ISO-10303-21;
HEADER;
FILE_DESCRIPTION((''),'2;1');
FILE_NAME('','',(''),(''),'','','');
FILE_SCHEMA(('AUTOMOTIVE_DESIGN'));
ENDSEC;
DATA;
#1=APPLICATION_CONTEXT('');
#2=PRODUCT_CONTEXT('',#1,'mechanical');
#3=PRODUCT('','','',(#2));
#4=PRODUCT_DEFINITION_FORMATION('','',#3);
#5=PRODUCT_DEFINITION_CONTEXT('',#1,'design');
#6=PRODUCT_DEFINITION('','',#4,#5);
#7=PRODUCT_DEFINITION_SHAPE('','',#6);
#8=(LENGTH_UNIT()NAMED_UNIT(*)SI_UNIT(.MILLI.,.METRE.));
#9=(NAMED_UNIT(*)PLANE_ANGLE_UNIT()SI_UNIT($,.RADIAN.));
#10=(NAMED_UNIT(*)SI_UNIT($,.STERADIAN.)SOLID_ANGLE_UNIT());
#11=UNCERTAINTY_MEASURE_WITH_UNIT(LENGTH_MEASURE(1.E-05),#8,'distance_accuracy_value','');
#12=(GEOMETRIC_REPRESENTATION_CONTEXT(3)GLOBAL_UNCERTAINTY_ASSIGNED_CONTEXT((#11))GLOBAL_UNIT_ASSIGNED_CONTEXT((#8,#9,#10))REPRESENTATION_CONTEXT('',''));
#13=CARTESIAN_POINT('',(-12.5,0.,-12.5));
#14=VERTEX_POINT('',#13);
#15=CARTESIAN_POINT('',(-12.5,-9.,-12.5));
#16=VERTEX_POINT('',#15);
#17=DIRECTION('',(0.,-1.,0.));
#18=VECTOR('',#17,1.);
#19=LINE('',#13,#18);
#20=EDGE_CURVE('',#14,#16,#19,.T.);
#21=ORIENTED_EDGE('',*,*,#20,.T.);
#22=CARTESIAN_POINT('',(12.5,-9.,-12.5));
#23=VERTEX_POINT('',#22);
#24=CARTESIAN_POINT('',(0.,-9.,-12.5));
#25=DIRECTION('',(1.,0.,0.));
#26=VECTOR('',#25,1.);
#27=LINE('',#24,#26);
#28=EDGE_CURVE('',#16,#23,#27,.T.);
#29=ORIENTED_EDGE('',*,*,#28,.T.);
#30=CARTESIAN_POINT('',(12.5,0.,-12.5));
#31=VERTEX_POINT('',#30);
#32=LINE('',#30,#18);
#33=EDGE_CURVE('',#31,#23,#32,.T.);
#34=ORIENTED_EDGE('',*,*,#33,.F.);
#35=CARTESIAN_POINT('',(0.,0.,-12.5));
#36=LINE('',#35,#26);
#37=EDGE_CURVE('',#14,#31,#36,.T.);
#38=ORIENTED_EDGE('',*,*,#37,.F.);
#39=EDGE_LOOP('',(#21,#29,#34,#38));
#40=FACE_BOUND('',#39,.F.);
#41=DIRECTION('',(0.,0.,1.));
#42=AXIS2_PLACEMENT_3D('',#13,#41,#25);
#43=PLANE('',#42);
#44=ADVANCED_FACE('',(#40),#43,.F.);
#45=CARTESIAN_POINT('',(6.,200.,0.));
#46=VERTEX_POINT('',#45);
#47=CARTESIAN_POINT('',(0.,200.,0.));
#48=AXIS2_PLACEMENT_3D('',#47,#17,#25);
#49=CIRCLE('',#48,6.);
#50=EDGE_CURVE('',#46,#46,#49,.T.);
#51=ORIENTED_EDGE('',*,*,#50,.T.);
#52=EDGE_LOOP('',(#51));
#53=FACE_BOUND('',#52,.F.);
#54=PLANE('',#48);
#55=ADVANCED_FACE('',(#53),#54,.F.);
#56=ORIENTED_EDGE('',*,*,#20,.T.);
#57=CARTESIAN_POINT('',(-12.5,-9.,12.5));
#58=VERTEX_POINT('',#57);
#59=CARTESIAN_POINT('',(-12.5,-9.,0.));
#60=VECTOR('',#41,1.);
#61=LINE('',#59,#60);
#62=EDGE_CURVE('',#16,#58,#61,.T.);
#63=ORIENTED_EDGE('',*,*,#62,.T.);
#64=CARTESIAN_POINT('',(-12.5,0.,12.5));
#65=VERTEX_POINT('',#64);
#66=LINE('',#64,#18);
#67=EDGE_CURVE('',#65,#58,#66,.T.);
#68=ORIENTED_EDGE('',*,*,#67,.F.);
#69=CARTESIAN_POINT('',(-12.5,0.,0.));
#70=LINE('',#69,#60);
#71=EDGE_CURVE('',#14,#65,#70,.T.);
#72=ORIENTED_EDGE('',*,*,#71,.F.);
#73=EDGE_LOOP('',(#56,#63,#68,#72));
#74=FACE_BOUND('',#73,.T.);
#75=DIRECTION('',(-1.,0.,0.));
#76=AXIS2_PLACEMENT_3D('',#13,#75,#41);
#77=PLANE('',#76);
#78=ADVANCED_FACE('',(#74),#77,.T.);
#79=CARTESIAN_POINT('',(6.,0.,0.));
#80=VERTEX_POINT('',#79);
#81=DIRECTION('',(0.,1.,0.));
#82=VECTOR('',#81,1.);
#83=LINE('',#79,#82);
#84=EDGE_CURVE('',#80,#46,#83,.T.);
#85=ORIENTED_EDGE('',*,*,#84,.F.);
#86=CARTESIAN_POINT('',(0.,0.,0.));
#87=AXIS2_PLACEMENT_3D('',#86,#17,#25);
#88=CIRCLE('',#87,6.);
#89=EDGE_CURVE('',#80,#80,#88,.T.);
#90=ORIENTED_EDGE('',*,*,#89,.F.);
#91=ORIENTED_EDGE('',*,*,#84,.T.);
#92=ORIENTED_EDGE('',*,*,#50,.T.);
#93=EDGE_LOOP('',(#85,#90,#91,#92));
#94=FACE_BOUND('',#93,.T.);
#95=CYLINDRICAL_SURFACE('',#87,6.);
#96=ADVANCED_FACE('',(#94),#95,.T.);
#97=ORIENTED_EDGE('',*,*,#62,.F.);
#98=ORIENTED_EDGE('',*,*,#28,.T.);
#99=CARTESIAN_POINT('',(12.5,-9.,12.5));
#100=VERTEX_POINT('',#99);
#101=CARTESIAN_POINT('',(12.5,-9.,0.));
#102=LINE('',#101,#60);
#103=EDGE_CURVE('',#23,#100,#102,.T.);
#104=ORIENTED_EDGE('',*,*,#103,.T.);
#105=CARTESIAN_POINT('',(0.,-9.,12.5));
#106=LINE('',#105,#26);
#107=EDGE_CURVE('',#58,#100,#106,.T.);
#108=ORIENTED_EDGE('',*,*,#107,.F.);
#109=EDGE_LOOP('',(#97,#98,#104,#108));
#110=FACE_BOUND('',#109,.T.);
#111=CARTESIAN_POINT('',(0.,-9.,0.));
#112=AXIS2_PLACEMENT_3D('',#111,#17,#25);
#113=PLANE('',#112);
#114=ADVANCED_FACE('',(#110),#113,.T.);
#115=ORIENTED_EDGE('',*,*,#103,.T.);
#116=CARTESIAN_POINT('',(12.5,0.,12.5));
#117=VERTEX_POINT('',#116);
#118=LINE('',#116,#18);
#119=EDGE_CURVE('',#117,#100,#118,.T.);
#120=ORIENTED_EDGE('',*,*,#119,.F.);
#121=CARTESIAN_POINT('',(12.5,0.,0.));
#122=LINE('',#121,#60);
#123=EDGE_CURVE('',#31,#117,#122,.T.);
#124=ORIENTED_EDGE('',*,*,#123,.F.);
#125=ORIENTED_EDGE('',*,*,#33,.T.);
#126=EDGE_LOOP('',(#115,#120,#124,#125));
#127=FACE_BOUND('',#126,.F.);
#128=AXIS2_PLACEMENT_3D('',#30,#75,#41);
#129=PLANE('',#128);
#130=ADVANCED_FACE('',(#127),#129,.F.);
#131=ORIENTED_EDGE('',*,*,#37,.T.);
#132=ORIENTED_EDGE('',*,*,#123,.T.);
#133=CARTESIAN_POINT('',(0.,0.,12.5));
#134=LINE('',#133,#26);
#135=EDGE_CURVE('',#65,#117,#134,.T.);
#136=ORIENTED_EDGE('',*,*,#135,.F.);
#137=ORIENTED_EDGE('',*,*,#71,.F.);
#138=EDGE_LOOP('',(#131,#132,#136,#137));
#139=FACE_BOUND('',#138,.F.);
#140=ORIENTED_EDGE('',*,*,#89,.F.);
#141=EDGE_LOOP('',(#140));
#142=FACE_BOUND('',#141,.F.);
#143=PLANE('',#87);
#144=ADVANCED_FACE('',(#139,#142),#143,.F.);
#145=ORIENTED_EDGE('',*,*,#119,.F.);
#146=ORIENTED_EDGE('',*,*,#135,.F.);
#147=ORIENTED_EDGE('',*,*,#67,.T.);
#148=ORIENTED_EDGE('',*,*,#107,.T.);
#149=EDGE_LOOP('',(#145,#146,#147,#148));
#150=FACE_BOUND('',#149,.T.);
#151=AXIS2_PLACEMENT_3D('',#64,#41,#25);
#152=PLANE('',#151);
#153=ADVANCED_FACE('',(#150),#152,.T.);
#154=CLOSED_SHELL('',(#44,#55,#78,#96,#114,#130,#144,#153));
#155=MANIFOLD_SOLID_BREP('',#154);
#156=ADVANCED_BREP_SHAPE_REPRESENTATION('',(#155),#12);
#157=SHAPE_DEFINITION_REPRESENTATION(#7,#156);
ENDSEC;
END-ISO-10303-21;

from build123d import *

# Parameters (mm, degrees)
F0_R     = 6
F1_DEPTH = 200
F2_R     = 6
F0_W     = 25
F0_H     = 25
F3_DEPTH = 9


with BuildPart() as f1:
    # F0 (on Front) → F1 (new body)
    with BuildSketch(Plane.XZ):
        Circle(F0_R)
    extrude(amount=-F1_DEPTH)

    # F2 (on face) + F0 (on Front) → F3 (join)
    with BuildSketch(Plane.XZ):
        Circle(F2_R)
    with BuildSketch(Plane.XZ):
        Rectangle(F0_W, F0_H)
        Circle(F0_R, mode=Mode.SUBTRACT)
    extrude(amount=F3_DEPTH)


solid = f1.part
